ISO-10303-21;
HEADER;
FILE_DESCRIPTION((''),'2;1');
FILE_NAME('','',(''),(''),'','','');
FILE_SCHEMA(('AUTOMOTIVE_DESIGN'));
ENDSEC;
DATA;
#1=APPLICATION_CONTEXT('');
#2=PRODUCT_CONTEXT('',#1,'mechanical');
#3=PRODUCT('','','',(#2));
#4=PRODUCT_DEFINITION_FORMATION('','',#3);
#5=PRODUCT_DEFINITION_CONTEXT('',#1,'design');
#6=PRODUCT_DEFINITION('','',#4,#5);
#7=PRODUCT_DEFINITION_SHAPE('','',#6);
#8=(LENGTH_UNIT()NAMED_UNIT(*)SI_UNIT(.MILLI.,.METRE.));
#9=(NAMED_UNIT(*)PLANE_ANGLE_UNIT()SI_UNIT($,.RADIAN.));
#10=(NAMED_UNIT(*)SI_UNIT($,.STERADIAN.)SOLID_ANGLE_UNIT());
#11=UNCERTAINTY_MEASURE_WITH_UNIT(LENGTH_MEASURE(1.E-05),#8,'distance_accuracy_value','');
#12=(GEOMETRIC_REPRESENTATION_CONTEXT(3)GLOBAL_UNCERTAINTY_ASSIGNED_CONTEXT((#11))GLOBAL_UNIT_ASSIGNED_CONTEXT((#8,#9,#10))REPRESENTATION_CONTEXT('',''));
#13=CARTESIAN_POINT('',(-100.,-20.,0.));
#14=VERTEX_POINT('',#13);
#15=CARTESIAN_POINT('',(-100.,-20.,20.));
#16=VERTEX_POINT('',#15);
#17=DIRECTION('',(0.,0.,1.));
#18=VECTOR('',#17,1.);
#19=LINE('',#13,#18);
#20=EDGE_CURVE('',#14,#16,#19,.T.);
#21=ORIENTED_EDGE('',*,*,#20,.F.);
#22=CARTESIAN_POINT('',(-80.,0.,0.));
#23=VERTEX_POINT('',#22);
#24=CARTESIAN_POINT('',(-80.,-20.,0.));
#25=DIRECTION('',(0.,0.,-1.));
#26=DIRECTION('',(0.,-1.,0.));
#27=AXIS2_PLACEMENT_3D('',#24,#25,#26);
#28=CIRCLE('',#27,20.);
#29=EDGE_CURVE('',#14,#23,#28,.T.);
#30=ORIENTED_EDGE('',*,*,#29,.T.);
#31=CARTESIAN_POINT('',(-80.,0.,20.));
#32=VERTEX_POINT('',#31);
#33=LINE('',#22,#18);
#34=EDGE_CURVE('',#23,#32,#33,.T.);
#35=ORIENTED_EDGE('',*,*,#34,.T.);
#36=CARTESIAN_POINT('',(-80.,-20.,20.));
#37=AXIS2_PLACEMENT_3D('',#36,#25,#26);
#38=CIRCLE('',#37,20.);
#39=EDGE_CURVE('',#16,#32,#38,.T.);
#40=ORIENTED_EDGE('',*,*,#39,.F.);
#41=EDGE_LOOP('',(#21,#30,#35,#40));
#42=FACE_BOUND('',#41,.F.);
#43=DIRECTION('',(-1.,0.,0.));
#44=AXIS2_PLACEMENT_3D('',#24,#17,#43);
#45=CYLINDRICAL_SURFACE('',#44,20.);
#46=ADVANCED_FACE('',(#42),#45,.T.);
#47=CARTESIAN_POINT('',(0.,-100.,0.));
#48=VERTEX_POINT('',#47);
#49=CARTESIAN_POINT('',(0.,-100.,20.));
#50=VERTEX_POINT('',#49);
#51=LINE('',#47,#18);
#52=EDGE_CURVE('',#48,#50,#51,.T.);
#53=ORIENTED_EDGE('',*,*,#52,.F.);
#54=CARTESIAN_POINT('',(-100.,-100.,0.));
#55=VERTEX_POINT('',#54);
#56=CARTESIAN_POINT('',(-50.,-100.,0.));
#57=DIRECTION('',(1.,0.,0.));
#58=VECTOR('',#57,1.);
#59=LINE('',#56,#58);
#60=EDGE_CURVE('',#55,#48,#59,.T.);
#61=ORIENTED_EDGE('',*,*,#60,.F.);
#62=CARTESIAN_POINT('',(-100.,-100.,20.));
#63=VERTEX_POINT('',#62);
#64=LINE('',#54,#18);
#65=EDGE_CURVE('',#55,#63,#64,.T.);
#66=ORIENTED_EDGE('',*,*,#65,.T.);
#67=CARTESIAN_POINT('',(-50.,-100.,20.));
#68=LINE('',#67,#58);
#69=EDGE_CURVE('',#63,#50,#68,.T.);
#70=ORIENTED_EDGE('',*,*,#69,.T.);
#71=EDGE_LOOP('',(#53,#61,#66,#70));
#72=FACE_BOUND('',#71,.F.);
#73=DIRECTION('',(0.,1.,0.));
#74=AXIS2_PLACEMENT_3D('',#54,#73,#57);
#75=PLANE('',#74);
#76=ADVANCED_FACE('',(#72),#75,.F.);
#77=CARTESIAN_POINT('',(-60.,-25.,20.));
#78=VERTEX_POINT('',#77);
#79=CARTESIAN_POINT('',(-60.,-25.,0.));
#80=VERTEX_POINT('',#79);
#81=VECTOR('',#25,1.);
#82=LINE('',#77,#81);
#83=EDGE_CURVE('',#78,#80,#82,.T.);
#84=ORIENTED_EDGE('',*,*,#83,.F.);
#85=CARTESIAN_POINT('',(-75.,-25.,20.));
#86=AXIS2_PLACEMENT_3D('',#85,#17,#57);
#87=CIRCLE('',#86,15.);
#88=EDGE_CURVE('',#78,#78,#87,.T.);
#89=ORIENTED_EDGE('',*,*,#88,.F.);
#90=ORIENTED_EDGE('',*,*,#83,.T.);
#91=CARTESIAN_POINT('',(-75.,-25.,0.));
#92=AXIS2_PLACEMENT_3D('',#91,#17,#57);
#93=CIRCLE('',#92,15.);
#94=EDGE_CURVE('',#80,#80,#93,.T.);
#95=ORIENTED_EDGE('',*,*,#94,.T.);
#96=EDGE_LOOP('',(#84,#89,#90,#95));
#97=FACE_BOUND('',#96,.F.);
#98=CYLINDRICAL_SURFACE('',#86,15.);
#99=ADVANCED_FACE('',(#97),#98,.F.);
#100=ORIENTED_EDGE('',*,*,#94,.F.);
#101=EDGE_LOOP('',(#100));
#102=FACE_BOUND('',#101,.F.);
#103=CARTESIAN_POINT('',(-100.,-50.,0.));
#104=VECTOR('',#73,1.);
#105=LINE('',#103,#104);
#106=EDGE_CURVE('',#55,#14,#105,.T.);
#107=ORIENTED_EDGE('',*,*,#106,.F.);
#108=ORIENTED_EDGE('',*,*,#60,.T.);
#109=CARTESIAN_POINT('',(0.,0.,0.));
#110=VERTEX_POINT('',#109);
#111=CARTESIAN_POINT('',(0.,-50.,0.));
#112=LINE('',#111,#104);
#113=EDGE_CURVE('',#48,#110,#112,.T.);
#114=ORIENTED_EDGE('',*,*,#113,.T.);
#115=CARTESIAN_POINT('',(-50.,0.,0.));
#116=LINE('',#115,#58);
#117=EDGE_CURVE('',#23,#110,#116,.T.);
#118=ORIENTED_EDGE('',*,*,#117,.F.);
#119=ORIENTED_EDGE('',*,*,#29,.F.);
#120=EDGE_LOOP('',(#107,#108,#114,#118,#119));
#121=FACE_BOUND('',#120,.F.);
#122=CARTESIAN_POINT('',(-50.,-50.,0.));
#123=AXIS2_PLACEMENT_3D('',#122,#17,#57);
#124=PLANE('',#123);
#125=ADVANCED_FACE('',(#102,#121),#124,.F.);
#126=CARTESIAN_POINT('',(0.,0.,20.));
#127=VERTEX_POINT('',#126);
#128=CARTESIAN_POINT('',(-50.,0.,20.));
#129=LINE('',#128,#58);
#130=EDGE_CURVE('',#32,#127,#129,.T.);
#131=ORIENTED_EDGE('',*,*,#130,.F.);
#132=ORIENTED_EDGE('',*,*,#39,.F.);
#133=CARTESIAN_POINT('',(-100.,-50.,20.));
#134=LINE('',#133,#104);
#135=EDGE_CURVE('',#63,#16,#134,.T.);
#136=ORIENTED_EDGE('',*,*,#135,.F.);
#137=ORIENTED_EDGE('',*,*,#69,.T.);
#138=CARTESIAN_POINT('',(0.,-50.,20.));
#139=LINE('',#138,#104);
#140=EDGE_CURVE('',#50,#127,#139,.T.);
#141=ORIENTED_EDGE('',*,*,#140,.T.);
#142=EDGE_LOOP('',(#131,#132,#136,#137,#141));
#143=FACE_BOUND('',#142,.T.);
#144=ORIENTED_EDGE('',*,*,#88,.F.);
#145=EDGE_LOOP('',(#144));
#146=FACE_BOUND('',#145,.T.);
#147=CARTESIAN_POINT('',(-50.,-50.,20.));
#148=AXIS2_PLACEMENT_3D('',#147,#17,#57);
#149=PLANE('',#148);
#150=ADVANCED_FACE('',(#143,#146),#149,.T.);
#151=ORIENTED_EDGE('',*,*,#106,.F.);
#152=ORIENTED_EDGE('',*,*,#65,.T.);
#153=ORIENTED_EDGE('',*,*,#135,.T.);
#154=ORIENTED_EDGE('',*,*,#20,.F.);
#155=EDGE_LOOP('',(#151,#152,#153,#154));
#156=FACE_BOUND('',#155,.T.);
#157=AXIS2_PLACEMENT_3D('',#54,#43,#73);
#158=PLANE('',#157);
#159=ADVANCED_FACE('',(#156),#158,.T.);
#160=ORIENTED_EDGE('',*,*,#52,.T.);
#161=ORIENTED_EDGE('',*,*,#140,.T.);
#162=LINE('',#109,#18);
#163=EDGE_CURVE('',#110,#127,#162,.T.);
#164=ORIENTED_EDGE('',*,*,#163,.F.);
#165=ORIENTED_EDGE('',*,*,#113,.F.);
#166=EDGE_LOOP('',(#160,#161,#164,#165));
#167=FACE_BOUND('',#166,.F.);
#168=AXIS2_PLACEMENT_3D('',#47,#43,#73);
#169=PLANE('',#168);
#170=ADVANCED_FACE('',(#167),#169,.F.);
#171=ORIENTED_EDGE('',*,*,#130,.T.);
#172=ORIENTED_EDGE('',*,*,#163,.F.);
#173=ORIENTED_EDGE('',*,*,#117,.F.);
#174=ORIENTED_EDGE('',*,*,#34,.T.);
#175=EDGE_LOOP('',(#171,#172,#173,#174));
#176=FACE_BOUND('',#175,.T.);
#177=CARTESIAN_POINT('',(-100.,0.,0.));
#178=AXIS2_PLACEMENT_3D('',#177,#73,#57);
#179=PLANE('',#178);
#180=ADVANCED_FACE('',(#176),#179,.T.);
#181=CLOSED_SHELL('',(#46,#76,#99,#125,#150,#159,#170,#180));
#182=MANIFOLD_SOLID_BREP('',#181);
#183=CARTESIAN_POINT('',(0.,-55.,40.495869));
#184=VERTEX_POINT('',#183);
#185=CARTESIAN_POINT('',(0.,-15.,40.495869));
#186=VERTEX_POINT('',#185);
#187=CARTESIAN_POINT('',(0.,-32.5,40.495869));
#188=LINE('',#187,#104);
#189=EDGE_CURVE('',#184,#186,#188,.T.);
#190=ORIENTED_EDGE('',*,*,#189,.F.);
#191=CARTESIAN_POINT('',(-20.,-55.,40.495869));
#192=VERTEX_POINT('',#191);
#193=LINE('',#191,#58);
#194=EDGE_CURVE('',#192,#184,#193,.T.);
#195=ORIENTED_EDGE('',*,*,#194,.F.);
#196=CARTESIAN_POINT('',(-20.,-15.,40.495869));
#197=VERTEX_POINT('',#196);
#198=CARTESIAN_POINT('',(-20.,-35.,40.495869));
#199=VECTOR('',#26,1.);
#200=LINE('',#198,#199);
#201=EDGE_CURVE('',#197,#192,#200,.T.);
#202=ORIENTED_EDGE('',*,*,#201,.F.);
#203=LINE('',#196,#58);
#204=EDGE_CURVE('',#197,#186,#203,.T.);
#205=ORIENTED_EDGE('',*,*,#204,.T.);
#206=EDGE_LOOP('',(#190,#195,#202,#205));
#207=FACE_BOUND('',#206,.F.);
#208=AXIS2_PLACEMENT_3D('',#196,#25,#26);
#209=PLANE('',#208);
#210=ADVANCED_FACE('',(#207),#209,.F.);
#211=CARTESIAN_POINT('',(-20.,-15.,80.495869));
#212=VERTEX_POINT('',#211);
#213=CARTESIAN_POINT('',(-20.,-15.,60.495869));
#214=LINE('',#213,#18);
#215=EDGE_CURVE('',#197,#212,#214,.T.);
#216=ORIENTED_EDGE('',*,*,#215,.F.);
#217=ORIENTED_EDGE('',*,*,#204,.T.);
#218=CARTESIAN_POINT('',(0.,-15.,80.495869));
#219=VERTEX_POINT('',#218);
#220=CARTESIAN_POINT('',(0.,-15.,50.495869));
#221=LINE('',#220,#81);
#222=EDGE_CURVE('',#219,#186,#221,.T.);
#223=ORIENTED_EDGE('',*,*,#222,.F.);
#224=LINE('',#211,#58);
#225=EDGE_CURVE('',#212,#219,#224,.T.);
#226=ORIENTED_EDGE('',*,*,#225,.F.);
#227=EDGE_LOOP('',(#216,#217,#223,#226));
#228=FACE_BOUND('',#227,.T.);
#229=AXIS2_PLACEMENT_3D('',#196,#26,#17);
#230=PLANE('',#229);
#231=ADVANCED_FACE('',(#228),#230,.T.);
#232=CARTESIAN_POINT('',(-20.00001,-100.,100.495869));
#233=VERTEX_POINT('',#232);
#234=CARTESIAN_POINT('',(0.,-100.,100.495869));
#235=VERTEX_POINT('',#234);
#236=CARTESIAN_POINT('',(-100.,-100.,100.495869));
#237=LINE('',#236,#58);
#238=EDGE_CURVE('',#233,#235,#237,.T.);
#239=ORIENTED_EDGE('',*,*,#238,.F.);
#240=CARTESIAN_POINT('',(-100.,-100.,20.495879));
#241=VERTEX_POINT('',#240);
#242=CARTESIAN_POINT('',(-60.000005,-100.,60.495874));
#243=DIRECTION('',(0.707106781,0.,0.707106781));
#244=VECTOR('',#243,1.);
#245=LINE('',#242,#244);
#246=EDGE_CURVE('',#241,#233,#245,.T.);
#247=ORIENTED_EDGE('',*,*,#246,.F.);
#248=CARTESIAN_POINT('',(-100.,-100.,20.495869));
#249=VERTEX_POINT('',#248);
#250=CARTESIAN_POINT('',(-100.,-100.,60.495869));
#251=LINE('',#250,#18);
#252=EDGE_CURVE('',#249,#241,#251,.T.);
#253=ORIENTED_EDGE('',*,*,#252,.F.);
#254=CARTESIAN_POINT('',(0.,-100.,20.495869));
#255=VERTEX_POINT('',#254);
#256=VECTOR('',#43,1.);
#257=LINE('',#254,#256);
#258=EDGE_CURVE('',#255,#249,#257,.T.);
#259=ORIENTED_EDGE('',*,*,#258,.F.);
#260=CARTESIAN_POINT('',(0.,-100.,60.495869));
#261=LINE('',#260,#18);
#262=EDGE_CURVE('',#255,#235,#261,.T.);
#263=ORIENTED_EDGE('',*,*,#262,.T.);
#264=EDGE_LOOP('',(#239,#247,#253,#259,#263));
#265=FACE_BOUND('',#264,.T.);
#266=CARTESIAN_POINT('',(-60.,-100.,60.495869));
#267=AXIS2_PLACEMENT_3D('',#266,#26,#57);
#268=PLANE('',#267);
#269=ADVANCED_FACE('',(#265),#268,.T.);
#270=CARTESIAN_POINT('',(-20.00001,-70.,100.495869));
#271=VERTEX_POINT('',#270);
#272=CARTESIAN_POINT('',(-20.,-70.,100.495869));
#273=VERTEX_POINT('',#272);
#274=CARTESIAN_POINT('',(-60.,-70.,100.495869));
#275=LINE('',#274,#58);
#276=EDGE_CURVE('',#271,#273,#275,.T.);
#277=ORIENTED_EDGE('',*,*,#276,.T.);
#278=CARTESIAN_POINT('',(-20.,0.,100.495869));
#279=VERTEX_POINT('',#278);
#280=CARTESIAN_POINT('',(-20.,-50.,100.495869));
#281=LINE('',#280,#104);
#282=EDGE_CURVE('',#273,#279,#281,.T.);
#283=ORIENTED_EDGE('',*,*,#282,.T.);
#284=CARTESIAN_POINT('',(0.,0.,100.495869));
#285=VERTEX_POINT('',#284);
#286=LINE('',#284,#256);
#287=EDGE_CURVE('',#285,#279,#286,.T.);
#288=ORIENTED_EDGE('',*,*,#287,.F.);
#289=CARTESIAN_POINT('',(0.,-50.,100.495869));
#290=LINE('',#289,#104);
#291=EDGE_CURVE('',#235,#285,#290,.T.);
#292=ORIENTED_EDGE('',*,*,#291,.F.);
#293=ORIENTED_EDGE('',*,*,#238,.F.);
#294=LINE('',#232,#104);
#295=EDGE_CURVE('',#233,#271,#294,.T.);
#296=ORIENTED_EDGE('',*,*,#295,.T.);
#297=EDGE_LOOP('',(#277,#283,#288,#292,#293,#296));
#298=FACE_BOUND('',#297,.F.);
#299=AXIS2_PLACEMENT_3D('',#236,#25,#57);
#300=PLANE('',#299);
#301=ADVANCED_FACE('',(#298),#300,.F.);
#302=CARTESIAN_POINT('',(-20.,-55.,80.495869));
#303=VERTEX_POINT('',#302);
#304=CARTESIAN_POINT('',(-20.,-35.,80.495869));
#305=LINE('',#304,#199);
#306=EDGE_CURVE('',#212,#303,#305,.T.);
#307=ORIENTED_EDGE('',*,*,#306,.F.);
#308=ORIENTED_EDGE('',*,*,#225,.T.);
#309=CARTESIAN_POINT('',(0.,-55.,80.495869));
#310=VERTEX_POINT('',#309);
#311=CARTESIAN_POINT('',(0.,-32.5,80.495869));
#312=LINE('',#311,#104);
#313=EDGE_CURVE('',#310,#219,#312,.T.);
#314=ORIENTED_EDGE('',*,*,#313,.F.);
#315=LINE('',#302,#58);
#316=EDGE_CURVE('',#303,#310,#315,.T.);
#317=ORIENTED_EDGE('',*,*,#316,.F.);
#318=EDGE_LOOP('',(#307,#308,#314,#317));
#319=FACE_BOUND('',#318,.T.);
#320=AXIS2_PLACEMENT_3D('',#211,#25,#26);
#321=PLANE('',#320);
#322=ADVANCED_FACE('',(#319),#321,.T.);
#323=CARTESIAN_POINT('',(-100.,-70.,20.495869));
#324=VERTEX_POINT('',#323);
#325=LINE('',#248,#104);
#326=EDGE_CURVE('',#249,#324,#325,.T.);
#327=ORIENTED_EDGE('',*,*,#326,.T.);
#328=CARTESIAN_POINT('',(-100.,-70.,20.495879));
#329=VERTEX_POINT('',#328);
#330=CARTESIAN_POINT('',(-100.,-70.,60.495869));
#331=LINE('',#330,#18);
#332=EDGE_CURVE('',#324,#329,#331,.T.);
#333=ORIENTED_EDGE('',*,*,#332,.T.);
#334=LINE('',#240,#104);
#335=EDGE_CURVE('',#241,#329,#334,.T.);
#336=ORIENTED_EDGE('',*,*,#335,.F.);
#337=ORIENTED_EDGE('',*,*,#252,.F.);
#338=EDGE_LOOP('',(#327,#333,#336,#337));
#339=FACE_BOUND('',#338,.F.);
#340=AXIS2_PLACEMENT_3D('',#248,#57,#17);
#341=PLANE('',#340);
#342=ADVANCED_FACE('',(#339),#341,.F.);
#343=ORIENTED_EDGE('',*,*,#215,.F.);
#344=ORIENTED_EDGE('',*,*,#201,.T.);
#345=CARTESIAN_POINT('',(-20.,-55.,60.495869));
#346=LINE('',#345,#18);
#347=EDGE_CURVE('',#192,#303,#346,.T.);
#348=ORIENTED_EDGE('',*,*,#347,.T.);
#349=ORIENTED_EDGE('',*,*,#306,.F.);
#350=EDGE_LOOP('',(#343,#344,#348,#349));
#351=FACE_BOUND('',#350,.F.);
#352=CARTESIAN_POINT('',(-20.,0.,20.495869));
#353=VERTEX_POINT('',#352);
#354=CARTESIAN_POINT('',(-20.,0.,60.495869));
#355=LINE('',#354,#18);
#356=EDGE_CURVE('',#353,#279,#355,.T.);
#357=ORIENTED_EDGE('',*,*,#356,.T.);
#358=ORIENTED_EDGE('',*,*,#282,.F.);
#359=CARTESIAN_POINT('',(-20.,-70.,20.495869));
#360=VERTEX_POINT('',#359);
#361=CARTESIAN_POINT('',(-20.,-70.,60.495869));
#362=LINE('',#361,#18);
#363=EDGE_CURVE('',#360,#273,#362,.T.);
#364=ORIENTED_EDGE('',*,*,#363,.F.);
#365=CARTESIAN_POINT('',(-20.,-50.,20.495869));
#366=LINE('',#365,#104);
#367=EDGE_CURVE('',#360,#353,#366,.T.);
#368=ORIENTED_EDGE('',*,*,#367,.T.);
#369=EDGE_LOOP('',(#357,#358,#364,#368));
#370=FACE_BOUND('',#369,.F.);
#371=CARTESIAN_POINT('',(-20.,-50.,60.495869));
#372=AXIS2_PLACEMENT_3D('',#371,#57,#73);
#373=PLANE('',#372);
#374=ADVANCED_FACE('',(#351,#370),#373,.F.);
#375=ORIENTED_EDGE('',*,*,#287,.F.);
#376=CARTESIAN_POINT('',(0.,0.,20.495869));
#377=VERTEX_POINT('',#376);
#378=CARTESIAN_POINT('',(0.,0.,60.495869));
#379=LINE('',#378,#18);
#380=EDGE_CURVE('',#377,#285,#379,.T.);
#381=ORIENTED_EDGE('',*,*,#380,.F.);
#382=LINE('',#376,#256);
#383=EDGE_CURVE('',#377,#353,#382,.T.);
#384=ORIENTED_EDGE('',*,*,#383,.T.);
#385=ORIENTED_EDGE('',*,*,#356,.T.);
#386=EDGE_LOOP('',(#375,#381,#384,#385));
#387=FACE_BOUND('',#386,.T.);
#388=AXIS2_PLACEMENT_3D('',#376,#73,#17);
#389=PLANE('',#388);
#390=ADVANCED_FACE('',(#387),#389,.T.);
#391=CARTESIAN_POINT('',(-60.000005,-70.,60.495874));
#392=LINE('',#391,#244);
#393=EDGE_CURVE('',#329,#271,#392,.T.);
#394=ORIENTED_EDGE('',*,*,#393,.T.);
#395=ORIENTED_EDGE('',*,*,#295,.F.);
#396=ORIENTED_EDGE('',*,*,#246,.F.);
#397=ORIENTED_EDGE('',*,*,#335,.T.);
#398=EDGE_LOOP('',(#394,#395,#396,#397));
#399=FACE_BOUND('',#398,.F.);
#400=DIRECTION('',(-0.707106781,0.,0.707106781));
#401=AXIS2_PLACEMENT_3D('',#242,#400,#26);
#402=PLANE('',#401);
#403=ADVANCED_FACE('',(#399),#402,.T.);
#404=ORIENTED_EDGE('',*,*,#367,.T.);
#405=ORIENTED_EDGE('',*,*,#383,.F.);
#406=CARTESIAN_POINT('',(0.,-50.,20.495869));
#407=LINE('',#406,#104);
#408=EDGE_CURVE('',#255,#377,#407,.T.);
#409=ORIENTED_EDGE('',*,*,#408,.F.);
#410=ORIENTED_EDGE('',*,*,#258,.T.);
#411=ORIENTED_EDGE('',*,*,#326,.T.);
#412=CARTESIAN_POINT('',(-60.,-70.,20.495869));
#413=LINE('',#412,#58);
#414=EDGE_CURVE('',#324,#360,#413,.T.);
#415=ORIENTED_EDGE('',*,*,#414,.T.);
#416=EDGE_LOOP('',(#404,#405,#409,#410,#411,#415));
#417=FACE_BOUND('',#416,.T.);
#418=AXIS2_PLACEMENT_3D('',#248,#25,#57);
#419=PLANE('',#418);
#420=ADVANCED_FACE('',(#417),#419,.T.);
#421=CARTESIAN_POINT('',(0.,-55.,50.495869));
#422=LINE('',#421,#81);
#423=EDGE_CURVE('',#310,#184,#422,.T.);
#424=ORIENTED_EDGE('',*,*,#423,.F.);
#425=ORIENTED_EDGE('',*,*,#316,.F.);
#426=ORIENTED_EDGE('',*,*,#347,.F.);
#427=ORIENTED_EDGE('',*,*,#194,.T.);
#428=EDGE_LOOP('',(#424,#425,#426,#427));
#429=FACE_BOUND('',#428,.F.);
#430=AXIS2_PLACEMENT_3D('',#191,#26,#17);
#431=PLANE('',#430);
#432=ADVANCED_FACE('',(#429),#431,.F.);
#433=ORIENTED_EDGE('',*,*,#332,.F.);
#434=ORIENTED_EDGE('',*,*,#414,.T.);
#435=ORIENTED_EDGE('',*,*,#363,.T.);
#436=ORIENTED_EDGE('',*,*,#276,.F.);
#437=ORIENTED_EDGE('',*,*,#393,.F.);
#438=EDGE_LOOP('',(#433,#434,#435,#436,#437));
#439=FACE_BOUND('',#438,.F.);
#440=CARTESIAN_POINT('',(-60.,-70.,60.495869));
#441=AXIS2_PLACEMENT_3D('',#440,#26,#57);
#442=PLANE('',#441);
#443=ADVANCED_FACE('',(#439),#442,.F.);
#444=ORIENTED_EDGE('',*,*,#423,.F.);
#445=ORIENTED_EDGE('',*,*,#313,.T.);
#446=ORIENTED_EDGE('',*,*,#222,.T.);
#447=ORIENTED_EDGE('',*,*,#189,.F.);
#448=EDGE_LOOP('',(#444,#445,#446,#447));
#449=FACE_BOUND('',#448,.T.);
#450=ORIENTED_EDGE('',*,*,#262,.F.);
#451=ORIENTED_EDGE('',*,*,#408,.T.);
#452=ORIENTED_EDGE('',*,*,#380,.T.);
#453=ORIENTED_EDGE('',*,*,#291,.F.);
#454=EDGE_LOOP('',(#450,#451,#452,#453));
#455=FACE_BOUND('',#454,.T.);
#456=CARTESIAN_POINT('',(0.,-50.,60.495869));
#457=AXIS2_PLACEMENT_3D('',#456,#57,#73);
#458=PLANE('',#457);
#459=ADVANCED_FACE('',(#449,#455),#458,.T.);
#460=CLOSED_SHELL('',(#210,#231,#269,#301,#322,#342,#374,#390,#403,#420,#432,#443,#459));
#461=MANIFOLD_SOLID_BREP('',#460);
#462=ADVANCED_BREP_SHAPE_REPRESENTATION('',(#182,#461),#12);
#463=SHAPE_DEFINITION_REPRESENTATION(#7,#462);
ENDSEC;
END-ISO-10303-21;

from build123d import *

# Parameters (mm, degrees)
F0_W      = 100
F0_H      = 100
F1_DEPTH  = 20
F2_W      = 100
F2_H      = 80
F3_DEPTH  = 20
F4_R      = 15
F5_DEPTH  = 21
F6_W      = 80
F6_H      = 80
F7_DEPTH  = 30
F8_SIZE   = 79.99999
F9_W      = 40
F9_H      = 40
F10_DEPTH = 22
F11_R     = 20


# Not quite as in the source:
# - a fillet or chamfer is up to 0.001 mm smaller than in the source, because OpenCascade refuses the exact size


with BuildPart() as f1:
    # F0 (on Top) → F1 (new body)
    with BuildSketch(Plane.XY):
        with Locations((-50, -50)):
            Rectangle(F0_W, F0_H)
    extrude(amount=F1_DEPTH)

    # F4 (on face) → F5 (cut)
    with BuildSketch(Plane.XY.offset(20)):
        with Locations((-75, -25)):
            Circle(F4_R)
    extrude(amount=-F5_DEPTH, mode=Mode.SUBTRACT)

    # F11
    f11_edges = [f1.edges().sort_by_distance(p)[0] for p in [
        (-100, 0, 10),
    ]]
    fillet(f11_edges, radius=F11_R)


with BuildPart() as f3:
    # F2 (on Right) → F3 (new body)
    with BuildSketch(Plane.YZ):
        with Locations((-50, 60.4958688773)):
            Rectangle(F2_W, F2_H)
    extrude(amount=-F3_DEPTH)

    # F6 (on face) → F7 (join)
    with BuildSketch(Plane.XZ.offset(100)):
        with Locations((-60, 60.4958688773)):
            Rectangle(F6_W, F6_H)
    extrude(amount=-F7_DEPTH)

    # F8 (size 80 in the source; OpenCascade refuses exactly that, so slightly less here)
    f8_edges = [f3.edges().sort_by_distance(p)[0] for p in [
        (-100, -85, 100.495869),
    ]]
    chamfer(f8_edges, length=F8_SIZE)

    # F9 (on face) → F10 (cut)
    with BuildSketch(Plane(origin=(-20, 0, 0), x_dir=(0, -1, 0), z_dir=(-1, 0, 0))):
        with Locations((35, 60.4958688773)):
            Rectangle(F9_W, F9_H)
    extrude(amount=-F10_DEPTH, mode=Mode.SUBTRACT)


solid = Compound([f1.part, f3.part])
